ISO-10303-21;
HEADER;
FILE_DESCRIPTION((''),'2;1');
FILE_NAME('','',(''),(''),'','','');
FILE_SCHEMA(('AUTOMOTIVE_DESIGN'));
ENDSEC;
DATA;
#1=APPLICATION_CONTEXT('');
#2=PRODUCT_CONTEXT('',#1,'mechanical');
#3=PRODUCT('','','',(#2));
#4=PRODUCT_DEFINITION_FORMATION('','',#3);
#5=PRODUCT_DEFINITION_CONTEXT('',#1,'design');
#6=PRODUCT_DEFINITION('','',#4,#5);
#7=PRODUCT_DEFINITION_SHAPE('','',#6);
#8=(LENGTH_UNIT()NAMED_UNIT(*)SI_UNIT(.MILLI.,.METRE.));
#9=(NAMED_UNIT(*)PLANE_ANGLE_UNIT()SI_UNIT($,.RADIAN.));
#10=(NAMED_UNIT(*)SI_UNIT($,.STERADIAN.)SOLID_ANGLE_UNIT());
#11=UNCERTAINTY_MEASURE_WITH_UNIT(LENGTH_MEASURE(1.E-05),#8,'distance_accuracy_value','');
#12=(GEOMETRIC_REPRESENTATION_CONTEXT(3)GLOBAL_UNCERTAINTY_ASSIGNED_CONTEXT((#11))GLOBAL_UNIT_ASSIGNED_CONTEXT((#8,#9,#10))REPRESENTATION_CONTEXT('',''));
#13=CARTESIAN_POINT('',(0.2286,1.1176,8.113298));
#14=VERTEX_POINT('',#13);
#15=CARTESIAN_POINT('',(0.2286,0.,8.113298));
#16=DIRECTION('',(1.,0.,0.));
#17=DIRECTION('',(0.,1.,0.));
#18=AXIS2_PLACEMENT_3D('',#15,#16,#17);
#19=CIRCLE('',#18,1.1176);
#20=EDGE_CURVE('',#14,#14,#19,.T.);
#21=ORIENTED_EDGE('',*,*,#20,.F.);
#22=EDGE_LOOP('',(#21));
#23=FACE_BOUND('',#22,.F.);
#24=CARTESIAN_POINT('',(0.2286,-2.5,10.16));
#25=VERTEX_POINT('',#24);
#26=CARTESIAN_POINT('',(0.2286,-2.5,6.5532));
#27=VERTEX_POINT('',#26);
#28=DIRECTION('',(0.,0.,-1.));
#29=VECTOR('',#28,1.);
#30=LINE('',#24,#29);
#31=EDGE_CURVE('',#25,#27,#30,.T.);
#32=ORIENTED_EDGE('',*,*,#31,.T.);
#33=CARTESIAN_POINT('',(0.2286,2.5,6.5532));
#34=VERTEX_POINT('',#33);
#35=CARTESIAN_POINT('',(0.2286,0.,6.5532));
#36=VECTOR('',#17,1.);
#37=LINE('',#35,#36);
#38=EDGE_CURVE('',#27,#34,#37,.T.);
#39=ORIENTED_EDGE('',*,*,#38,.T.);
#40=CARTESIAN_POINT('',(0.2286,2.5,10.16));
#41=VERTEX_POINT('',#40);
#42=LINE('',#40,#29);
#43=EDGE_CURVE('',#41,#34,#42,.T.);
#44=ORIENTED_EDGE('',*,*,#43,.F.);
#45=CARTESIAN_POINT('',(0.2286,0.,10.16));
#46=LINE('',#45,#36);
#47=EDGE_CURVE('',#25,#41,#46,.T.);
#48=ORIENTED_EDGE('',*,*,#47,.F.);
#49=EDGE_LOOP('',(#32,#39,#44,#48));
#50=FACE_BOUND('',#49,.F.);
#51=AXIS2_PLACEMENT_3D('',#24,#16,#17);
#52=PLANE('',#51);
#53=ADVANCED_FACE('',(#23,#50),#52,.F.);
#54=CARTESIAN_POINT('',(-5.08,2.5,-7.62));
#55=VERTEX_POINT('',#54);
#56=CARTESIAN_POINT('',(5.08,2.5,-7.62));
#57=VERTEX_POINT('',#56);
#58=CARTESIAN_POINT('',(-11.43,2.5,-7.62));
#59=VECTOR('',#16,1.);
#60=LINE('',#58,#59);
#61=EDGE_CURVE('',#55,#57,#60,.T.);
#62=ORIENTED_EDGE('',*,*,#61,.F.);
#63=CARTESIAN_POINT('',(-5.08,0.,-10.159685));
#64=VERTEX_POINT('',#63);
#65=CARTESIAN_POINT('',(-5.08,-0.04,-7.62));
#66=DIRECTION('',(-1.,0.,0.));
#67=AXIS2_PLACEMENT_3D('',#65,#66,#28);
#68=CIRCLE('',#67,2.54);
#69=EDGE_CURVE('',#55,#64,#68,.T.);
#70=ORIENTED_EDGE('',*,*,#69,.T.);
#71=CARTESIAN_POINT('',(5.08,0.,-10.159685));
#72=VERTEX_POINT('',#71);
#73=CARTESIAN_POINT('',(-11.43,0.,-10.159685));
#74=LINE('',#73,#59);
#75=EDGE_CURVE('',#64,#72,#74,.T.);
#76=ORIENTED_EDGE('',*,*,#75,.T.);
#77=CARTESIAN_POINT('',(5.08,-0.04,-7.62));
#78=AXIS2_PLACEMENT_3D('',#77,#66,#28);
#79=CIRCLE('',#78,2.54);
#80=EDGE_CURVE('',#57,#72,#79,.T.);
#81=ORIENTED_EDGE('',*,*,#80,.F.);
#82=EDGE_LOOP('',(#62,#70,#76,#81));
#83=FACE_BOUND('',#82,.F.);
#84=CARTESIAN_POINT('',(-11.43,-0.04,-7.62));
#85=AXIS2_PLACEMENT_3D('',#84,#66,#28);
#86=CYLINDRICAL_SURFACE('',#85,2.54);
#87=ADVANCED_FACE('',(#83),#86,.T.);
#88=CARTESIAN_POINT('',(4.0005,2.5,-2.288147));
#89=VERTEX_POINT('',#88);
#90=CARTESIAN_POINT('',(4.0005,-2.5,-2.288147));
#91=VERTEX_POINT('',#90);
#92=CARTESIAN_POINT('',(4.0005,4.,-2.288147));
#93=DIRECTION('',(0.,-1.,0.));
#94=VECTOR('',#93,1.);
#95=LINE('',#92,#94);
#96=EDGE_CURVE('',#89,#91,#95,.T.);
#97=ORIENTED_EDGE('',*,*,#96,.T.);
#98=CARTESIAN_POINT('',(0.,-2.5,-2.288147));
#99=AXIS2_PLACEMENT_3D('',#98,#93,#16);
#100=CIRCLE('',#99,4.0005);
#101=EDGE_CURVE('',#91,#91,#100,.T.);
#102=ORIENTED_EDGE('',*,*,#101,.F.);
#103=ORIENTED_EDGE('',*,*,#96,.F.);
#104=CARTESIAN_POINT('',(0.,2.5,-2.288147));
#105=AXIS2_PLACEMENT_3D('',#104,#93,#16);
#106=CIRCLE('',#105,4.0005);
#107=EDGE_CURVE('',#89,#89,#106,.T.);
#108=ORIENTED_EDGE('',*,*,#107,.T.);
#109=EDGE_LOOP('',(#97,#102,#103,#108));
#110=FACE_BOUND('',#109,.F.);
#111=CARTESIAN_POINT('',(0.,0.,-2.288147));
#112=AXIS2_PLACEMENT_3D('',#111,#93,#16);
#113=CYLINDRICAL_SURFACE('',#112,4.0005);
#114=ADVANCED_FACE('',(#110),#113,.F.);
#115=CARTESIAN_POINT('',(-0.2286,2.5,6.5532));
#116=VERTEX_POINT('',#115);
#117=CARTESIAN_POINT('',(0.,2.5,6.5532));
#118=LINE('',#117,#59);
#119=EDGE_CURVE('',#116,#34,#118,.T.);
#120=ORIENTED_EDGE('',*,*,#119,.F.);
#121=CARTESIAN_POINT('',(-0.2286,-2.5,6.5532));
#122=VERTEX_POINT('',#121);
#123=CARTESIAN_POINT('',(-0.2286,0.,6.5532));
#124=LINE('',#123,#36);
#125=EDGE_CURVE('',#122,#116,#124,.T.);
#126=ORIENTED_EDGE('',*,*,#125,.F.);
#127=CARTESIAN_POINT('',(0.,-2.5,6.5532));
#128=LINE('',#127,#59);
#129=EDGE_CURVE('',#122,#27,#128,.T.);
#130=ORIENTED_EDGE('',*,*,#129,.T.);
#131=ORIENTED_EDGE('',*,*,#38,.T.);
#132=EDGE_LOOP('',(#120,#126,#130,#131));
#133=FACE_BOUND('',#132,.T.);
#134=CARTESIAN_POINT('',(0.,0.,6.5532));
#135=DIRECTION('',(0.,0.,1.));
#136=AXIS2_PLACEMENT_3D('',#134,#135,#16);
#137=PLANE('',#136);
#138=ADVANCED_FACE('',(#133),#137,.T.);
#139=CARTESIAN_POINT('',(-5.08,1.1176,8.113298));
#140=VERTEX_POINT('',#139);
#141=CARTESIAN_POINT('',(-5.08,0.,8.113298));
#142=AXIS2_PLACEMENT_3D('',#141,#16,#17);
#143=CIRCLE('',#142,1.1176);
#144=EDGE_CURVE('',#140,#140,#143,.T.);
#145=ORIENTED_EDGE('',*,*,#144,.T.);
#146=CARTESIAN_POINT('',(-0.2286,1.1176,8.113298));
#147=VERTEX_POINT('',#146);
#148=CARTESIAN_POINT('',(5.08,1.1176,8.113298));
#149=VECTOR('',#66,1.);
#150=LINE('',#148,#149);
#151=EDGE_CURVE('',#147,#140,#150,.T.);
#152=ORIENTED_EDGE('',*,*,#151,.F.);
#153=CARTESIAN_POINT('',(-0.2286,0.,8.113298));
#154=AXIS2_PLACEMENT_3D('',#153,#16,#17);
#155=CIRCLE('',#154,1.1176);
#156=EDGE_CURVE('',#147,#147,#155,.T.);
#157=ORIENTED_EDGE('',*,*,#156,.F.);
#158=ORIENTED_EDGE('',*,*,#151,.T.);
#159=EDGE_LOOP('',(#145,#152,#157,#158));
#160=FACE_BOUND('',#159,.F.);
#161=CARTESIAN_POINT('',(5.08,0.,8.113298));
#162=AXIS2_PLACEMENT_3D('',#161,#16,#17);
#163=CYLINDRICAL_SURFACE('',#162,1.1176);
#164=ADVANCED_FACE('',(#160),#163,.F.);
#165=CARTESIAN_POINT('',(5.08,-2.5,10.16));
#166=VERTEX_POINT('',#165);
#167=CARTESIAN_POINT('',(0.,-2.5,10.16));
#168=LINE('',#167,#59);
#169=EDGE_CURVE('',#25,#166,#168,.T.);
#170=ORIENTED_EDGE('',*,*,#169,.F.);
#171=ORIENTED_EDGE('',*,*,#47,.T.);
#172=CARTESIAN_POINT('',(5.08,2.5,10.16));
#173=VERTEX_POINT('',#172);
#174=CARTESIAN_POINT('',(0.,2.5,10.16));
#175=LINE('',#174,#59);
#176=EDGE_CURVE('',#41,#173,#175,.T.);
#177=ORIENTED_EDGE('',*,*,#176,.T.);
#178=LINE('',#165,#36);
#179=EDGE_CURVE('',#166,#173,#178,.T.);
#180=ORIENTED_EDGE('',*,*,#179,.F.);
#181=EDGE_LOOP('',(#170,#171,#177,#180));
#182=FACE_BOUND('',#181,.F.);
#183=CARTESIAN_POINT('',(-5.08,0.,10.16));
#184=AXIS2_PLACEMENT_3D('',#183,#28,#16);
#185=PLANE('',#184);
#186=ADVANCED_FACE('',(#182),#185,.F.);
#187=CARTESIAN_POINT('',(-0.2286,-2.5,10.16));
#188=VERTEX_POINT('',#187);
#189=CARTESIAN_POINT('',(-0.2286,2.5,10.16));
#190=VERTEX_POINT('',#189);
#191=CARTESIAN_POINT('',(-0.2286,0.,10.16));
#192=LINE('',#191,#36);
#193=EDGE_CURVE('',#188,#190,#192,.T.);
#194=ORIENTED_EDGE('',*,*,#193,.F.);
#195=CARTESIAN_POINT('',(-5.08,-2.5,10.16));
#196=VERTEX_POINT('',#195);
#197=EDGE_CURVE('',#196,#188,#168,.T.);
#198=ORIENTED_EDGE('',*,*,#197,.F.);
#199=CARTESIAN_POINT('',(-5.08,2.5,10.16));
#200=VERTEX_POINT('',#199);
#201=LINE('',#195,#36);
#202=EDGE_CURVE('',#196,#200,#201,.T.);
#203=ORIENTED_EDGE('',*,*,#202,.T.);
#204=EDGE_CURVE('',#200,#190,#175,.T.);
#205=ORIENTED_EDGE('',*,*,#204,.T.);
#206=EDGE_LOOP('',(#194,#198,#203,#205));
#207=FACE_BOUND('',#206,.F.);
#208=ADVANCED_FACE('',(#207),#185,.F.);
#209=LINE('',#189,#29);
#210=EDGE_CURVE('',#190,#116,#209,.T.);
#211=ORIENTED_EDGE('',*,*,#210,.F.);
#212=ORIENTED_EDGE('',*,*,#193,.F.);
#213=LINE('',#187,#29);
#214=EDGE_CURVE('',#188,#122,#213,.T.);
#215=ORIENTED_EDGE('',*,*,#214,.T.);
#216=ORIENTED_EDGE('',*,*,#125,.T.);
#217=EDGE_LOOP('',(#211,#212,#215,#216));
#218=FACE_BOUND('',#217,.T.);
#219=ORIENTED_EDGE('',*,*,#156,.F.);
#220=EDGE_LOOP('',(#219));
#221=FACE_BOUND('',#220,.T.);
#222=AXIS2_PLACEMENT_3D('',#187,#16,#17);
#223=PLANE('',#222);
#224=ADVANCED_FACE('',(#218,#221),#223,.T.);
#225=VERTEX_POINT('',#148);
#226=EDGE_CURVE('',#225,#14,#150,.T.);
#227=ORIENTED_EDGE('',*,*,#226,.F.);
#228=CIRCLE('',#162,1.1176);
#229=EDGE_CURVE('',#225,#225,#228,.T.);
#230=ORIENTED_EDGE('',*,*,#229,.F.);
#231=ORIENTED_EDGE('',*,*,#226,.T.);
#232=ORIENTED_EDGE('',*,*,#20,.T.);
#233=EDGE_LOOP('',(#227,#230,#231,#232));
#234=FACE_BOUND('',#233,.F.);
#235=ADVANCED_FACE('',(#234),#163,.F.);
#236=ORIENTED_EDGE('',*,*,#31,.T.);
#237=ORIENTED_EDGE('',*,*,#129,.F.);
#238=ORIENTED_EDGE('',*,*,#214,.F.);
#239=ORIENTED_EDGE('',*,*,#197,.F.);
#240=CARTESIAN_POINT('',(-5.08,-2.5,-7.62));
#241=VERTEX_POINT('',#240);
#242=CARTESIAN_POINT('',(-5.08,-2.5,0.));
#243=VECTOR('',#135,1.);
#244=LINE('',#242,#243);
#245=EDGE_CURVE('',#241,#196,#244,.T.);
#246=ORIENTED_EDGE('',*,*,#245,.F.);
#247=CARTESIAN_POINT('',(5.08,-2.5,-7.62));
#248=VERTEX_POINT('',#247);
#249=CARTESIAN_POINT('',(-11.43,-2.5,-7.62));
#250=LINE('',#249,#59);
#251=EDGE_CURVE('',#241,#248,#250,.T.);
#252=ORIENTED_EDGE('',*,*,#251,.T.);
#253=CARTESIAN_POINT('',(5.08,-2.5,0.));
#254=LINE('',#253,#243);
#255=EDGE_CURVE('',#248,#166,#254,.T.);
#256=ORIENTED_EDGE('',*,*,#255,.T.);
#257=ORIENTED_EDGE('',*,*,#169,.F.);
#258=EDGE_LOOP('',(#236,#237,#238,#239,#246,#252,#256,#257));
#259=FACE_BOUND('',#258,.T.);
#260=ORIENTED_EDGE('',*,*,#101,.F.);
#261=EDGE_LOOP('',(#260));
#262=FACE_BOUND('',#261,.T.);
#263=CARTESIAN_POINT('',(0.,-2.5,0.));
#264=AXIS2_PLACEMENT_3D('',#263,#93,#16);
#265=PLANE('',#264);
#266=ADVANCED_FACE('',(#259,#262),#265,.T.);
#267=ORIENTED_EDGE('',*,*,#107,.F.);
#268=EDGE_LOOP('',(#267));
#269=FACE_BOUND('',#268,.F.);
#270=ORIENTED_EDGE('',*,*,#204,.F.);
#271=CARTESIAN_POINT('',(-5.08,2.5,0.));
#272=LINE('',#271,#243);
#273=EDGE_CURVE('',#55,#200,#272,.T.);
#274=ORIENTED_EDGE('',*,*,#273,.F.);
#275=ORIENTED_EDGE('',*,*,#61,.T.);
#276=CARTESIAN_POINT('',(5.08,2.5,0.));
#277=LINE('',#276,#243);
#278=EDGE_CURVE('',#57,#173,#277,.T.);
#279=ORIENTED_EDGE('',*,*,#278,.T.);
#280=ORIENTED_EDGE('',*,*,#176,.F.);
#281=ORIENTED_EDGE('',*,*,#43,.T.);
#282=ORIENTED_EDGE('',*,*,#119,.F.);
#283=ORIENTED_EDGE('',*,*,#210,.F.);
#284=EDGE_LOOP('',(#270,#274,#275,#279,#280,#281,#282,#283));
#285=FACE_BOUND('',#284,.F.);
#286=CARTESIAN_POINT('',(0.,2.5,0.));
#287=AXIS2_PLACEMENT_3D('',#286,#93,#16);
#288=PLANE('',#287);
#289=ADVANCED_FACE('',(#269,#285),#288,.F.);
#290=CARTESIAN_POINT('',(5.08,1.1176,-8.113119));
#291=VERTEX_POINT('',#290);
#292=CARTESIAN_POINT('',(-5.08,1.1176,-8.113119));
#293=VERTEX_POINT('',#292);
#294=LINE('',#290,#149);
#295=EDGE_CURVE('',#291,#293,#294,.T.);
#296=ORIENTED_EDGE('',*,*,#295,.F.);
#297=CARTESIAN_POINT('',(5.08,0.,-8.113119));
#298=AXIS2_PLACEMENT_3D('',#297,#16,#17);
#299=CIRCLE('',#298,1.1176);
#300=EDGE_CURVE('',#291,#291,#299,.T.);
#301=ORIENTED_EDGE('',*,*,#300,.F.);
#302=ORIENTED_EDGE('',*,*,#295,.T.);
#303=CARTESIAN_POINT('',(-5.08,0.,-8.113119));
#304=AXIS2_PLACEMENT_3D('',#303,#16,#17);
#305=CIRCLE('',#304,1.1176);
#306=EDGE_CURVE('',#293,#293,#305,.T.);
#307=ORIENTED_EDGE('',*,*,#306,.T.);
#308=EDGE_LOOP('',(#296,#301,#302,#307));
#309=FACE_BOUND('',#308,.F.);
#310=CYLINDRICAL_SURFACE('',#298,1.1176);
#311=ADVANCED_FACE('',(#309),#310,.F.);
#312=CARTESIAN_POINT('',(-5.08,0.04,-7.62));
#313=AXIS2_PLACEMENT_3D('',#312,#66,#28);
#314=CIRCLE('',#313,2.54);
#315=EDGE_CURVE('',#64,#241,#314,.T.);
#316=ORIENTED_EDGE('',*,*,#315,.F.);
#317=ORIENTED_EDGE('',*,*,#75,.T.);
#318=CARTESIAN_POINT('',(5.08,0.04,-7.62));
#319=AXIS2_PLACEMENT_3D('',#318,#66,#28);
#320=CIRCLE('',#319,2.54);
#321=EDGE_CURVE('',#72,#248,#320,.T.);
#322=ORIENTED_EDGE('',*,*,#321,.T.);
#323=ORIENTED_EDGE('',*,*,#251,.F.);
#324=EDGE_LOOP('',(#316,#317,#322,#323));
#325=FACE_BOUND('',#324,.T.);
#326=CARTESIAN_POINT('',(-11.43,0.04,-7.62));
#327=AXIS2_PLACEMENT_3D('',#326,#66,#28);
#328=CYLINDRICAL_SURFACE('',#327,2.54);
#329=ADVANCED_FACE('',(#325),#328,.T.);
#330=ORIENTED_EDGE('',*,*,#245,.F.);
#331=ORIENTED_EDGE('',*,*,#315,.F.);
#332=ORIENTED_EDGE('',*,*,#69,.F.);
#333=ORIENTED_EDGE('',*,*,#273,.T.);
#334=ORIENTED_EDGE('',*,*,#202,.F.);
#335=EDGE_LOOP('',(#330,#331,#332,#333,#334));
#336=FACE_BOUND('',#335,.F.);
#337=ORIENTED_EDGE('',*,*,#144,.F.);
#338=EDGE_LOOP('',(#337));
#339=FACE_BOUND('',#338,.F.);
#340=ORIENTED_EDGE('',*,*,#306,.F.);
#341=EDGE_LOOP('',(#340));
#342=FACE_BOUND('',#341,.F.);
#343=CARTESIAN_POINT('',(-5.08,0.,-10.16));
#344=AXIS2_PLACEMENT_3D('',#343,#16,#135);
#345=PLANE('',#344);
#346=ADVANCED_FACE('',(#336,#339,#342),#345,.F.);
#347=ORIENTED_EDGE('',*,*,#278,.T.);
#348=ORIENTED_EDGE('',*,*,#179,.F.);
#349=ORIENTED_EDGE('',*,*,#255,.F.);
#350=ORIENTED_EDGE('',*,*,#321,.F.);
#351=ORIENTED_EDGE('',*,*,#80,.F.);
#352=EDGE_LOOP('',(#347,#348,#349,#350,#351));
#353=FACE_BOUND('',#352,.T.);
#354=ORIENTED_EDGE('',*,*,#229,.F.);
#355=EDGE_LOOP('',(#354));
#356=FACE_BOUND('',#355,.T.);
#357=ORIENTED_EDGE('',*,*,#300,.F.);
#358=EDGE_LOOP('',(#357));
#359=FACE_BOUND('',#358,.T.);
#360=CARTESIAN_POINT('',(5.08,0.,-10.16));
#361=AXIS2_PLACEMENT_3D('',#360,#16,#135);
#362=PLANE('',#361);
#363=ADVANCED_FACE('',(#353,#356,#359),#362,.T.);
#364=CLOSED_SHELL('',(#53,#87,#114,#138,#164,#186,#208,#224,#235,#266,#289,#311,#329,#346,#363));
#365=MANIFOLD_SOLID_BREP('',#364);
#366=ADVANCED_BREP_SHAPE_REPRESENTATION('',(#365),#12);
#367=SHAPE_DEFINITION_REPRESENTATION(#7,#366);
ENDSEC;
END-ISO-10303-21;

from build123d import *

# Parameters (mm, degrees)
F0_W         = 10.16
F0_H         = 20.32
F2_DEPTH     = 2.5
F1_R         = 4.0005
F3_DEPTH     = 4
F4_R         = 1.1176
F5_DEPTH     = 10.16
F6_W         = 0.4572
F6_H         = 5
F7_DEPTH     = 3.6068
F8_R         = 1.1176
F9_DEPTH     = 10.16
F10_T1_DEPTH = 22.86


# Not quite as in the source:
# - a fillet or chamfer that OpenCascade refuses, or shapes differently, is made with other operations: its cross-section is extruded or revolved along the edge and cut away or added


with BuildPart() as f2:
    # F0 (on Front) → F2 (new body, symmetric)
    with BuildSketch(Plane.XZ):
        Rectangle(F0_W, F0_H)
    extrude(amount=F2_DEPTH, both=True)

    # F1 (on face) → F3 (cut, symmetric)
    with BuildSketch(Plane.XZ):
        with Locations((0, -2.2881471086)):
            Circle(F1_R)
    extrude(amount=F3_DEPTH, both=True, mode=Mode.SUBTRACT)

    # F4 (on face) → F5 (cut)
    with BuildSketch(Plane.YZ.offset(5.08)):
        with Locations((0, -8.1131188199)):
            Circle(F4_R)
    extrude(amount=-F5_DEPTH, mode=Mode.SUBTRACT)

    # F6 (on face) → F7 (cut)
    with BuildSketch(Plane.XY.offset(10.16)):
        Rectangle(F6_W, F6_H)
    extrude(amount=-F7_DEPTH, mode=Mode.SUBTRACT)

    # F8 (on face) → F9 (cut)
    with BuildSketch(Plane.YZ.offset(5.08)):
        with Locations((0, 8.1132977634)):
            Circle(F8_R)
    extrude(amount=-F9_DEPTH, mode=Mode.SUBTRACT)

    # F10: fillet of radius 2.54 on 2 edges, made by hand

    # F10_s2 → F10_t1 (cut)
    with BuildSketch(Plane.YZ.offset(-11.43)):
        with BuildLine():
            ThreePointArc((-0.04, -10.16), (1.7560512242, -9.4160512242), (2.5, -7.62))
            Line((2.5, -7.62), (2.5, -10.16))
            Line((2.5, -10.16), (-0.04, -10.16))
        make_face()
        with BuildLine():
            ThreePointArc((0.04, -10.16), (-1.7560512242, -9.4160512242), (-2.5, -7.62))
            Line((-2.5, -7.62), (-2.5, -10.16))
            Line((-2.5, -10.16), (0.04, -10.16))
        make_face()
    extrude(amount=F10_T1_DEPTH, mode=Mode.SUBTRACT)


solid = f2.part
